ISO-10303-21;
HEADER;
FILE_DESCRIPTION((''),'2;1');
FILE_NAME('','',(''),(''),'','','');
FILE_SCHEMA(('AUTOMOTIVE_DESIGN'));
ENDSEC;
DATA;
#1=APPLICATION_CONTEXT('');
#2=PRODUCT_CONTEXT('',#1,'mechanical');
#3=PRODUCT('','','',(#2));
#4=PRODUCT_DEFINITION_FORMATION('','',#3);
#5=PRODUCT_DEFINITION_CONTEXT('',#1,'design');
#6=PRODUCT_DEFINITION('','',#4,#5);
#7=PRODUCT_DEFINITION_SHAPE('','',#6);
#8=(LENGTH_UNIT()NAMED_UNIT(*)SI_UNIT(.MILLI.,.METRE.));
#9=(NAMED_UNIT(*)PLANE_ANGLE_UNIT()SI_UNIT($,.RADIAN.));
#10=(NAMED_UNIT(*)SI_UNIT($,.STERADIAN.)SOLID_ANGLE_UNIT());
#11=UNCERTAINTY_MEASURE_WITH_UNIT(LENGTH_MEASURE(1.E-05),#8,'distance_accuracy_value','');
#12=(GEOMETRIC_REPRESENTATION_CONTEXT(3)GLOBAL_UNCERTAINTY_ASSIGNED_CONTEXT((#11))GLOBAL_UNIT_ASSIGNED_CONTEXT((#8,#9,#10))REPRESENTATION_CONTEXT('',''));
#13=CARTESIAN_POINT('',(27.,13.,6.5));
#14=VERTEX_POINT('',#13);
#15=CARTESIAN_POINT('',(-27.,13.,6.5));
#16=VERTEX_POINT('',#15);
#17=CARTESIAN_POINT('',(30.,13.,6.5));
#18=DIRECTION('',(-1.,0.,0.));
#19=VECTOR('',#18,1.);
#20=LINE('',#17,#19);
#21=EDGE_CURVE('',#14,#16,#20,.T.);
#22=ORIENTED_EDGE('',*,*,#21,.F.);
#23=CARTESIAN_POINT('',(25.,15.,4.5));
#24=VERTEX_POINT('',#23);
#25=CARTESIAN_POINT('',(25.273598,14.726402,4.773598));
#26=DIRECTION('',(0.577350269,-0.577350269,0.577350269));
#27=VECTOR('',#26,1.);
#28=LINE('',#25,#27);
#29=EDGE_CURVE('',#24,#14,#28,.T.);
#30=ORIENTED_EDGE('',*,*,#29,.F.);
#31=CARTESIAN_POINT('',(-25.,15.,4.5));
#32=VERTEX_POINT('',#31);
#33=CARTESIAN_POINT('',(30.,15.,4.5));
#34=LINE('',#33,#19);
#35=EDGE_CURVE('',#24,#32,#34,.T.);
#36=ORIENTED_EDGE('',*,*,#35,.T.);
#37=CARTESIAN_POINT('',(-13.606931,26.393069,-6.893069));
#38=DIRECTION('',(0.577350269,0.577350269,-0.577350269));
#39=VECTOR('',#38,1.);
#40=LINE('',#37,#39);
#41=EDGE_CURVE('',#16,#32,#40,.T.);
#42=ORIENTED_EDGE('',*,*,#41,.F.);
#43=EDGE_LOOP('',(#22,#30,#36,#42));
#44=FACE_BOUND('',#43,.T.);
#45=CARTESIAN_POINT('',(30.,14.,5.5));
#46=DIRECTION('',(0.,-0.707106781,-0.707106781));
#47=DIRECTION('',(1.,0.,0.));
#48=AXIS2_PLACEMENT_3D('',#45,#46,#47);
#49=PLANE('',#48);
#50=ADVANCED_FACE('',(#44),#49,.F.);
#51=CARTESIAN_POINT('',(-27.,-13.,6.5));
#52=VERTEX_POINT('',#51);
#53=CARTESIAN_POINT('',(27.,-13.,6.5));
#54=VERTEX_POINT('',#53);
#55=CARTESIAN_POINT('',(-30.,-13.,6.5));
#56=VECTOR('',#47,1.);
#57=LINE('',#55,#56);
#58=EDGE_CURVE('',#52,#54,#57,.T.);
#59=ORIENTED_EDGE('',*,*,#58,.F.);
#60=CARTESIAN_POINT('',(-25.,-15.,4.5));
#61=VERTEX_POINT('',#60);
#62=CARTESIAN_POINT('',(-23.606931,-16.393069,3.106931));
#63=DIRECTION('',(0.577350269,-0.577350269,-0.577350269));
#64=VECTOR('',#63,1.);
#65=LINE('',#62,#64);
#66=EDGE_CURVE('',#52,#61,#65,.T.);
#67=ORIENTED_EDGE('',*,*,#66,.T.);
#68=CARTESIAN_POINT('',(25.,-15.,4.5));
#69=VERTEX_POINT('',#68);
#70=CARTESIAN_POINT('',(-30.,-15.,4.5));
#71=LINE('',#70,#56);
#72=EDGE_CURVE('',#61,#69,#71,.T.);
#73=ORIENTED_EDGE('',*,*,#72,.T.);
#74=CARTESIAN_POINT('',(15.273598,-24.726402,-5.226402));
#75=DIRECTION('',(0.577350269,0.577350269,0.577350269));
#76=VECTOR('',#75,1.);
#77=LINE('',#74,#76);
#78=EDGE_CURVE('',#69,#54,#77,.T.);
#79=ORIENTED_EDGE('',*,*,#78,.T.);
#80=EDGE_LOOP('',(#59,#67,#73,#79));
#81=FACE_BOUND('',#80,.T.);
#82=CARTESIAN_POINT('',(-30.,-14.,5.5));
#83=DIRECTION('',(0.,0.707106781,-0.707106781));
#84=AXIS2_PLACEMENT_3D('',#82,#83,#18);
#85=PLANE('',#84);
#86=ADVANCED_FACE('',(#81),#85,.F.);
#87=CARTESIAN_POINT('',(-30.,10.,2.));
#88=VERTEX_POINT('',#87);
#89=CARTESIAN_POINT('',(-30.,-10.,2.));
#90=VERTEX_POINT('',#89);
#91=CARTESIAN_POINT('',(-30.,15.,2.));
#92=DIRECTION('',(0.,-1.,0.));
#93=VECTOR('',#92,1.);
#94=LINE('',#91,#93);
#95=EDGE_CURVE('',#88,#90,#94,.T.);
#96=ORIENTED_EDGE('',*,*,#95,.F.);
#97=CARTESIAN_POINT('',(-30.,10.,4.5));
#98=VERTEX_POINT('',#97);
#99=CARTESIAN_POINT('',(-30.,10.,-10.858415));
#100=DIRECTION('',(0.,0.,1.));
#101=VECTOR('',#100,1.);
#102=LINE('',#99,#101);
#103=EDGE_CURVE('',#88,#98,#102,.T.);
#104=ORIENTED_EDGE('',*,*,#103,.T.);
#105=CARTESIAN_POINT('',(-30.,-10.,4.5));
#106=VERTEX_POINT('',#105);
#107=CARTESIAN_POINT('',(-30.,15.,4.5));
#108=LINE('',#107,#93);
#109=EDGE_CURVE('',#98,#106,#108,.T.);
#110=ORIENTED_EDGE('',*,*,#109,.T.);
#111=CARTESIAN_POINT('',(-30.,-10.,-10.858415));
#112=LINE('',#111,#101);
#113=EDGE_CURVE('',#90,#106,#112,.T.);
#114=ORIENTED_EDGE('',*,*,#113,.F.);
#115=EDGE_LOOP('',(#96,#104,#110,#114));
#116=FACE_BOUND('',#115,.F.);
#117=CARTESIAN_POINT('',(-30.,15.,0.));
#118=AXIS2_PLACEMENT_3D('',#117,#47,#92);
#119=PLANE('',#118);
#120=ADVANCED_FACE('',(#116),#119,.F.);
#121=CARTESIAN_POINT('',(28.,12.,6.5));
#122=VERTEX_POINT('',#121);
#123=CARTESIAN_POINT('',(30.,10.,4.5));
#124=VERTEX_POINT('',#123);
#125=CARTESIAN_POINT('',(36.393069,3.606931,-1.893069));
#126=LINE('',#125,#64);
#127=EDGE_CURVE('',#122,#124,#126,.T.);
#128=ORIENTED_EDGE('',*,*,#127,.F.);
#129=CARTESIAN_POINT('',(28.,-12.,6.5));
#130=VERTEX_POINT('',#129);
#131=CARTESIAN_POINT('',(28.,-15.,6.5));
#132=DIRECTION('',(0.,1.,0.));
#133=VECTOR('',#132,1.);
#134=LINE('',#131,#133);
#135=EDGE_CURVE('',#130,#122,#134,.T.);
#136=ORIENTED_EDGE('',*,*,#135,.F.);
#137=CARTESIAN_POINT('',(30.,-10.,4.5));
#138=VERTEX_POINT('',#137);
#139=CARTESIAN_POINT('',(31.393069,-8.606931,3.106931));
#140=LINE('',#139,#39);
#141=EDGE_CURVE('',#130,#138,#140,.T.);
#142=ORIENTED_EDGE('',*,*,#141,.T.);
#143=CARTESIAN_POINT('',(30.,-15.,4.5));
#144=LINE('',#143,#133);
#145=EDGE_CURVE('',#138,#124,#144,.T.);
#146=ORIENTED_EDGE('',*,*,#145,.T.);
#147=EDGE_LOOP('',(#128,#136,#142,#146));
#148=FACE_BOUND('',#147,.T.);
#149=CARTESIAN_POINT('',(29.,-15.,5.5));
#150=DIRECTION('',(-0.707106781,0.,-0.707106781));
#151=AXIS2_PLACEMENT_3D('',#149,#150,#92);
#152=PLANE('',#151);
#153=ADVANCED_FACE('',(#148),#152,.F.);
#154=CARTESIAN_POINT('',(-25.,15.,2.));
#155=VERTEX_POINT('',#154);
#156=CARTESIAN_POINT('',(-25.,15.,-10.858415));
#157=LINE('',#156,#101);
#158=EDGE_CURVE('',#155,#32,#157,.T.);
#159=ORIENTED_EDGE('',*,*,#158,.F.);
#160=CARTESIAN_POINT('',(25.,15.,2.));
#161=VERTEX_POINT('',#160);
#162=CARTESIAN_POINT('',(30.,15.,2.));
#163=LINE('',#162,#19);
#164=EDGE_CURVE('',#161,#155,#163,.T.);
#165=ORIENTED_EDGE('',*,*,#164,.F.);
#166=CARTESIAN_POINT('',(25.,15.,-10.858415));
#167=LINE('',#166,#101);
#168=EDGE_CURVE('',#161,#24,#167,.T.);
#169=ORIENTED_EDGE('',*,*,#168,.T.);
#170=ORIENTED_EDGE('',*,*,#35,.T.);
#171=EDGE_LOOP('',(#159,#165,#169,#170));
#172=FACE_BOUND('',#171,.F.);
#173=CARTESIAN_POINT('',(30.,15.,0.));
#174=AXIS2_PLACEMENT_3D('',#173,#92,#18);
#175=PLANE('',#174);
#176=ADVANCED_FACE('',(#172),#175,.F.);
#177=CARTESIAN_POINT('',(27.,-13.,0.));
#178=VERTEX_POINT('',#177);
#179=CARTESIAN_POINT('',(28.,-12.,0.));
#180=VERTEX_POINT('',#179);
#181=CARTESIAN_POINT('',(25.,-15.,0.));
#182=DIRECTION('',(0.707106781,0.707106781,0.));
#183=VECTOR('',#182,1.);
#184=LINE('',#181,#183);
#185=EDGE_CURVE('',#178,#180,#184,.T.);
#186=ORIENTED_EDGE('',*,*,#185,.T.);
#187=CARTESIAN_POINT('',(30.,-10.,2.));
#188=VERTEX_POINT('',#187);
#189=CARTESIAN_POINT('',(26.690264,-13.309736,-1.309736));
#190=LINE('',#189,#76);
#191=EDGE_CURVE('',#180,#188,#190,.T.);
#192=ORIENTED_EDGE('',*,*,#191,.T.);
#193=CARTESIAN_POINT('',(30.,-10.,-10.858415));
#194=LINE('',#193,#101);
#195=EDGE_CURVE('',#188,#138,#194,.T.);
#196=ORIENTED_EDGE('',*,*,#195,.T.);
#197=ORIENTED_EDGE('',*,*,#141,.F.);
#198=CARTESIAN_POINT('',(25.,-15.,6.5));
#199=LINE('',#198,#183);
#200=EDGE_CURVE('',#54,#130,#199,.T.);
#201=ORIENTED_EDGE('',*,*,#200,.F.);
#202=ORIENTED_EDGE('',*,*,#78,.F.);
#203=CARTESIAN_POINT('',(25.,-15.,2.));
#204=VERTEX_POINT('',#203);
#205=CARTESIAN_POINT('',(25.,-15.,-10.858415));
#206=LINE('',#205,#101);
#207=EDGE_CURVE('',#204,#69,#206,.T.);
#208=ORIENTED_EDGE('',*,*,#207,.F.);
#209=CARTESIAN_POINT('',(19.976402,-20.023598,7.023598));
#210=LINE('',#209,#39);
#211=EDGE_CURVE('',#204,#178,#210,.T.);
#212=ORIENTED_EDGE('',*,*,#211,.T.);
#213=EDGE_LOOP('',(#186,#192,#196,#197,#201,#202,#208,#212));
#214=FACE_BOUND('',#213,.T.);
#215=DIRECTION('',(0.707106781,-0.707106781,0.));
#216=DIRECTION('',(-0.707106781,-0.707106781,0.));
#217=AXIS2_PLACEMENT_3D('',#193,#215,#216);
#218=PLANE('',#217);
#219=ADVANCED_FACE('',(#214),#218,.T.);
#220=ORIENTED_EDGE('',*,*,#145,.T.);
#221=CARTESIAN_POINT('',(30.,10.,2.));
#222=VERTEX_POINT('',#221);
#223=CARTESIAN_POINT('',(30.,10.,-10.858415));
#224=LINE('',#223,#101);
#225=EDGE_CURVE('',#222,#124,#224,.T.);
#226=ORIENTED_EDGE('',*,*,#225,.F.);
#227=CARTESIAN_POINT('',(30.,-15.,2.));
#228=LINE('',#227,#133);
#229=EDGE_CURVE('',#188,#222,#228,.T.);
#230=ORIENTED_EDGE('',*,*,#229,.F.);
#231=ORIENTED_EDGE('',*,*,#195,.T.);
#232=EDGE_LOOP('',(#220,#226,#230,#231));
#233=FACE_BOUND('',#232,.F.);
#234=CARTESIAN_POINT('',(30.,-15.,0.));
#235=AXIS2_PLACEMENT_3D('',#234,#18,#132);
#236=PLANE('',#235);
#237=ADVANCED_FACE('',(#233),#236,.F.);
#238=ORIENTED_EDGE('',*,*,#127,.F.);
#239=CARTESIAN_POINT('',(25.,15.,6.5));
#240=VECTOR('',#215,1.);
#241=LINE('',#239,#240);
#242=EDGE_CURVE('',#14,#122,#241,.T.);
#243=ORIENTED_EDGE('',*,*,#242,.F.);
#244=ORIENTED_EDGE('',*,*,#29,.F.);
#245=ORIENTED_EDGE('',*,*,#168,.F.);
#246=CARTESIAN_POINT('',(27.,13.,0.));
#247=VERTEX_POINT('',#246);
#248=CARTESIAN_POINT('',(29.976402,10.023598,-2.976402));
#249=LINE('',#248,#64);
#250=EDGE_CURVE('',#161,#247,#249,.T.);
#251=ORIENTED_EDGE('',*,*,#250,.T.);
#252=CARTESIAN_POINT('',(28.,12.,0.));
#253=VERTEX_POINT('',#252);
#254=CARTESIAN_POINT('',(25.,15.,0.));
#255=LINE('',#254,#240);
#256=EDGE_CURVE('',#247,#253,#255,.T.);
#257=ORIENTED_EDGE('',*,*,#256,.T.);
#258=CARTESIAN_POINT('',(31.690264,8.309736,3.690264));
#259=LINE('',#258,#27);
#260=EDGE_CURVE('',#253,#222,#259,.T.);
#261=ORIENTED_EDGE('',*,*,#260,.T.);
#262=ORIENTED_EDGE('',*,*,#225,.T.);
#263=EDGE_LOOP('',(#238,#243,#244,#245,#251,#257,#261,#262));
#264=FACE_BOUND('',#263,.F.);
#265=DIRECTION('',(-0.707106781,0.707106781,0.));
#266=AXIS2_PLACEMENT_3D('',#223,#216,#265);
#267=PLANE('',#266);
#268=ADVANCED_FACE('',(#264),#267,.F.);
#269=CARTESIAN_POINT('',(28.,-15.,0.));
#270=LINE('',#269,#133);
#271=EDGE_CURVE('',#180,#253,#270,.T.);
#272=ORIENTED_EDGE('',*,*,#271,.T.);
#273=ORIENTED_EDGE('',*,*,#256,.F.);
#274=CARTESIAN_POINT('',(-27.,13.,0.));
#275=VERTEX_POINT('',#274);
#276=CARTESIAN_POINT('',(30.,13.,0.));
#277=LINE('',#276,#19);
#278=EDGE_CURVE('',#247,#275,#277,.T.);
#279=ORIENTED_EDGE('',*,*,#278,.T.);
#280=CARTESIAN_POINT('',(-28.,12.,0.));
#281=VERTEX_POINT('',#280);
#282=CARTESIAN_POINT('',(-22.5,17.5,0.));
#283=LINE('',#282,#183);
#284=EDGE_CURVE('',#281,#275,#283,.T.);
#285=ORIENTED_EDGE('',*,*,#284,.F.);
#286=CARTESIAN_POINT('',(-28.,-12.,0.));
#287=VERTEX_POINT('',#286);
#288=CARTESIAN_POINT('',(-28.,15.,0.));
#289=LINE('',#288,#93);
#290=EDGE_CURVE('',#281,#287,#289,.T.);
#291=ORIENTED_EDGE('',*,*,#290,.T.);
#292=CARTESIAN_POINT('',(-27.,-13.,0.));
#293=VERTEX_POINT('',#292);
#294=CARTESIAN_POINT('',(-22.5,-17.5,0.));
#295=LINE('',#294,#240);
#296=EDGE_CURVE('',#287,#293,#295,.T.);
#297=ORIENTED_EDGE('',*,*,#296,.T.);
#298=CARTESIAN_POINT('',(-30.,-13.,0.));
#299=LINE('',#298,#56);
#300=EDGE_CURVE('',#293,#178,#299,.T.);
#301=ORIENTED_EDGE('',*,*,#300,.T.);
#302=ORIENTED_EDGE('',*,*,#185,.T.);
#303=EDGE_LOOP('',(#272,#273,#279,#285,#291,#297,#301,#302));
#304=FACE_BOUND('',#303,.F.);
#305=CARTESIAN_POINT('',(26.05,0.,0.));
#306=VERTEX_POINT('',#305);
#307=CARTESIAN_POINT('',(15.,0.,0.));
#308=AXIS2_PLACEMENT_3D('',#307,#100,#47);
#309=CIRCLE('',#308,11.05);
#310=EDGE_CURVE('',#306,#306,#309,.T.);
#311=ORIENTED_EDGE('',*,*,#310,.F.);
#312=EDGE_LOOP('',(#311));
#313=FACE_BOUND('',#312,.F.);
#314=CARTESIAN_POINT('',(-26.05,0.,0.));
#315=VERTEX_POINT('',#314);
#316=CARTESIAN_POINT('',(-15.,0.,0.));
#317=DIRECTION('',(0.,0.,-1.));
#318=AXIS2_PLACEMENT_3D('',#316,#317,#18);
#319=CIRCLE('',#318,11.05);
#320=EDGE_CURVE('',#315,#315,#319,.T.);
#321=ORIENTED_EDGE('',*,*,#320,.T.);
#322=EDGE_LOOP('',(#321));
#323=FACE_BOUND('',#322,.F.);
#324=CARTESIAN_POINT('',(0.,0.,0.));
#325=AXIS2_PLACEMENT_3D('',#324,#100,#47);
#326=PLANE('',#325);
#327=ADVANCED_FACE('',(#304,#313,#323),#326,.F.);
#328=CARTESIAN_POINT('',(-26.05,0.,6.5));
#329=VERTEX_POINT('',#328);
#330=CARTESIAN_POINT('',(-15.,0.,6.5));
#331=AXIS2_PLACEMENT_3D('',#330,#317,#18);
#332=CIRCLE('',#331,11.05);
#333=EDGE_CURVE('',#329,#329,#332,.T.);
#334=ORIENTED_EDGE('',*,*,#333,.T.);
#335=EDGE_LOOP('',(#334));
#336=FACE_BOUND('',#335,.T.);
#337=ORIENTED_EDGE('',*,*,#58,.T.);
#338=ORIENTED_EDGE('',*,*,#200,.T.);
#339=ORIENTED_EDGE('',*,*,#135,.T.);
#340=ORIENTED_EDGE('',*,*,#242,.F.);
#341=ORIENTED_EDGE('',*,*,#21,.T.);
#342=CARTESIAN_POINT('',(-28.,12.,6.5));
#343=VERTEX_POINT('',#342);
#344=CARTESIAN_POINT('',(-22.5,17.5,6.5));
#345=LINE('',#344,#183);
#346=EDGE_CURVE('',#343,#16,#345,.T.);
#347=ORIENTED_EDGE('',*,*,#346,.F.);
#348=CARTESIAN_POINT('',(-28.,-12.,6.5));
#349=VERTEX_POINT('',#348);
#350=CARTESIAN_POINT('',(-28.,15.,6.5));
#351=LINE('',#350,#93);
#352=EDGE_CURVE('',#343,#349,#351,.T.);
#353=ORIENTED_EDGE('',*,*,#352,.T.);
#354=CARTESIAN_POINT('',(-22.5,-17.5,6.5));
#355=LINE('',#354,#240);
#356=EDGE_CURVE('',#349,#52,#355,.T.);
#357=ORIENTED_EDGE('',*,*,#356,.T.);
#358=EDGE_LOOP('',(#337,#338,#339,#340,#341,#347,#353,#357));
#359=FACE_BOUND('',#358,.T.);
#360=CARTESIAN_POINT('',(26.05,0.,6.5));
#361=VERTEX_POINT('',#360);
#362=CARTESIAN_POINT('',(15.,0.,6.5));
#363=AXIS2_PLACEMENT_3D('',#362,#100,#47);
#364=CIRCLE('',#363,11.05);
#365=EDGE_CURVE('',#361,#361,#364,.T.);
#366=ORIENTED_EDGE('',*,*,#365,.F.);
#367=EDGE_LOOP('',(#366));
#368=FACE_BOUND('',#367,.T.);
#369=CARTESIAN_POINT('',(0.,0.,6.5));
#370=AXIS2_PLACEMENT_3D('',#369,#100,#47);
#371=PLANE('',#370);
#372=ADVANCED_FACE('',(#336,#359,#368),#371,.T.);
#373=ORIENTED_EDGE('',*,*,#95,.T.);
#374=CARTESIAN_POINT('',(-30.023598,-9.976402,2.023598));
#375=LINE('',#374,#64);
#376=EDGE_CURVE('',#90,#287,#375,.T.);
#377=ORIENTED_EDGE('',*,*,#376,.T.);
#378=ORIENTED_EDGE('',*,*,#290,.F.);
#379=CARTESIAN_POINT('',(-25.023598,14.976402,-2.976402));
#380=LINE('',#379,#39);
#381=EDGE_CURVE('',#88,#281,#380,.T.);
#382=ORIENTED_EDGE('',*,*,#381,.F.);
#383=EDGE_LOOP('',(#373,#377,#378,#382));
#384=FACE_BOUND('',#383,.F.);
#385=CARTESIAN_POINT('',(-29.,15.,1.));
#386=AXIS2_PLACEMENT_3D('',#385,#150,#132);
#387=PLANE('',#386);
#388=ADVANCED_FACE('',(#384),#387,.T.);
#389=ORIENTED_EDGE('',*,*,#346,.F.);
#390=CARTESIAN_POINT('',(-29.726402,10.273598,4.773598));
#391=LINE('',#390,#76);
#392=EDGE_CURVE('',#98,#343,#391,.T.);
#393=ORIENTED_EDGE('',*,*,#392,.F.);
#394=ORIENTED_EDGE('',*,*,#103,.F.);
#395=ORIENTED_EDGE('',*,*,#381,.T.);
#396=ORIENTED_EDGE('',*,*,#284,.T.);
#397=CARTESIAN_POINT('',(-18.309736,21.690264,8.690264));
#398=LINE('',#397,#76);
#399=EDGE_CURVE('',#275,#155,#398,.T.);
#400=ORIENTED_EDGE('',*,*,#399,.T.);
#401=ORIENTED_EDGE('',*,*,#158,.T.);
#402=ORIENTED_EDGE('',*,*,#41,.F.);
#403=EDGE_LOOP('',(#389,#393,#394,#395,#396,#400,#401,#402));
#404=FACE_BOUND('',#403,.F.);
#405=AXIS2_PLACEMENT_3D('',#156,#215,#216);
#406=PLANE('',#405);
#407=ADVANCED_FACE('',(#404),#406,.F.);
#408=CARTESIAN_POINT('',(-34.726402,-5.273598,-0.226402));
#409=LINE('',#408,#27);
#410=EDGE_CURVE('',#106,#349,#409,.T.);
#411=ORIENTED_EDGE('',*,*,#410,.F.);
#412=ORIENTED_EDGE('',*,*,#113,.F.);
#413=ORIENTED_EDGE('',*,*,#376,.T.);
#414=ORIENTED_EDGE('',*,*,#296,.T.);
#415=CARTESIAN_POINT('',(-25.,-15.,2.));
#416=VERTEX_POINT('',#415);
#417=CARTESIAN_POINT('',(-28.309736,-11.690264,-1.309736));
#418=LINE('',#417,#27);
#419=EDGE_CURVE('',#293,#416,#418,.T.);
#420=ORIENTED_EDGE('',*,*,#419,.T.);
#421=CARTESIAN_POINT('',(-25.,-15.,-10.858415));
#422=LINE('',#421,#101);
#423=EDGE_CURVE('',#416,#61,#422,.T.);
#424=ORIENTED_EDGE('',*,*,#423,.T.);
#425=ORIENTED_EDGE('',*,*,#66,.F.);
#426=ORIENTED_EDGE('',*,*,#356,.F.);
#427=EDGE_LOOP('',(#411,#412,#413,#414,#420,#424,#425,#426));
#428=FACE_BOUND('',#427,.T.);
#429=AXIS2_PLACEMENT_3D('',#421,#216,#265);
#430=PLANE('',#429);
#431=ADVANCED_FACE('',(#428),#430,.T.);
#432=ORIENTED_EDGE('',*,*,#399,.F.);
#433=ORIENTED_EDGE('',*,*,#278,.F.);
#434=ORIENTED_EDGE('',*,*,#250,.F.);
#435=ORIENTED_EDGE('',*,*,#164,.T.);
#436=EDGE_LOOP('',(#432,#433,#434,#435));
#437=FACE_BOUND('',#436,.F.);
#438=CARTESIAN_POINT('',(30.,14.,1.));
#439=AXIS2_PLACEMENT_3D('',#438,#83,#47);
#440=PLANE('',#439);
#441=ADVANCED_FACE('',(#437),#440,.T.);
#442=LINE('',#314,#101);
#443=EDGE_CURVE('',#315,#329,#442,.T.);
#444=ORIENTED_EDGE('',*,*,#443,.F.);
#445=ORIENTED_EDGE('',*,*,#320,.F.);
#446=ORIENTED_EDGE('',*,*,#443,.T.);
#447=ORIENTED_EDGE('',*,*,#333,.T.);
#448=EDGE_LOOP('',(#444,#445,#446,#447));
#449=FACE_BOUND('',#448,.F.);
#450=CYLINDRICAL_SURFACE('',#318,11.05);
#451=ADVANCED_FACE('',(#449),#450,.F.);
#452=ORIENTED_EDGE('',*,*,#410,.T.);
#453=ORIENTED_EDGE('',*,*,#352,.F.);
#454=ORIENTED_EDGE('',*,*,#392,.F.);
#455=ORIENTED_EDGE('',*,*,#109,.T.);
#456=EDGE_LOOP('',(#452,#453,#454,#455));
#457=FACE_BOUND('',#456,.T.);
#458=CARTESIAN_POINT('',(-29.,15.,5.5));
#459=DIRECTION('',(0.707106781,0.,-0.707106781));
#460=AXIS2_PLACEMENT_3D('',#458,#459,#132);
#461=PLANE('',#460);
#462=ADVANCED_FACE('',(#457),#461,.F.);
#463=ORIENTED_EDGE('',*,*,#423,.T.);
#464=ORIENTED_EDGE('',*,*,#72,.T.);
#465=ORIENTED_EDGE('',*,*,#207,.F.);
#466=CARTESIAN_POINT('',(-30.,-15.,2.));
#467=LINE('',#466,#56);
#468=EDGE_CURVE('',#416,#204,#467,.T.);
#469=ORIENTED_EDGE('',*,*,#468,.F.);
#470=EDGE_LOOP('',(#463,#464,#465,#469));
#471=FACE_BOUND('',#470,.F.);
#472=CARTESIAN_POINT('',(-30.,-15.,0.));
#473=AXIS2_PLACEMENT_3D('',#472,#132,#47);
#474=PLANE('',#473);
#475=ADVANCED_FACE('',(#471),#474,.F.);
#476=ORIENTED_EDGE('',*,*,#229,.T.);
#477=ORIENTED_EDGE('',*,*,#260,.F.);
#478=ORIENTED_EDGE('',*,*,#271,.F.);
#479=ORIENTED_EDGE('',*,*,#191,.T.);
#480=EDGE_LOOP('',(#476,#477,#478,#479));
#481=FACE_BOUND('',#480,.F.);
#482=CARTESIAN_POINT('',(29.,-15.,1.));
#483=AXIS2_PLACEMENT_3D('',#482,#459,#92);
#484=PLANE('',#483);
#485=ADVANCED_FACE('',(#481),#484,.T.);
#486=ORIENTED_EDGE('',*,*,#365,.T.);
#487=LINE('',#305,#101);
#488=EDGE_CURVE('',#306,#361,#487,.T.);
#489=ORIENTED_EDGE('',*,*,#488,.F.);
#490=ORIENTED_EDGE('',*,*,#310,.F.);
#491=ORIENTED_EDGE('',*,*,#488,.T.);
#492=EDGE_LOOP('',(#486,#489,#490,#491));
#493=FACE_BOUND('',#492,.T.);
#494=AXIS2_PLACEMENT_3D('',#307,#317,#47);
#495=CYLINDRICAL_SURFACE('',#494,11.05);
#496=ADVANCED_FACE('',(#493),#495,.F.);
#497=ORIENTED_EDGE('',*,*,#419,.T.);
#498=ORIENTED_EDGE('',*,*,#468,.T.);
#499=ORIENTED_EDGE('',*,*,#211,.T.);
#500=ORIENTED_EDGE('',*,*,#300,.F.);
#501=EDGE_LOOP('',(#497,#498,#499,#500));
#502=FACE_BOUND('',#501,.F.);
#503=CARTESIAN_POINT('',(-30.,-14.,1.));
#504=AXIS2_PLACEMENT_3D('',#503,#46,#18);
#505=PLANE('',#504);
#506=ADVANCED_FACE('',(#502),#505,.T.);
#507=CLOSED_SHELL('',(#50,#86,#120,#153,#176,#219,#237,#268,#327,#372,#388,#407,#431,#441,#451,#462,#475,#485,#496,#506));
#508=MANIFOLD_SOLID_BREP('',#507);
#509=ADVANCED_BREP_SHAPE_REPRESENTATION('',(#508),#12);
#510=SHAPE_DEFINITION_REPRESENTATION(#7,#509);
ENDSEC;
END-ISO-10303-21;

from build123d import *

# Parameters (mm, degrees)
F0_R        = 11.05
F1_DEPTH    = 6.5
F2_SIZE     = 2
F3_T1_DEPTH = 28.2168298797


# Not quite as in the source:
# - a fillet or chamfer that OpenCascade refuses, or shapes differently, is made with other operations: its cross-section is extruded or revolved along the edge and cut away or added


with BuildPart() as f1:
    # F0 (on Top) → F1 (new body)
    with BuildSketch(Plane.XY):
        Polygon((30, 0), (30, 15), (-30, 15), (-30, 0), (-30, -15), (30, -15), align=None)
        with BuildLine():
            ThreePointArc((-3.95, 0), (-15, -11.05), (-26.05, 0))
            ThreePointArc((-26.05, 0), (-15, 11.05), (-3.95, 0))
        make_face(mode=Mode.SUBTRACT)
        with Locations((15, 0)):
            Circle(F0_R, mode=Mode.SUBTRACT)
    extrude(amount=F1_DEPTH)

    # F2
    f2_edges = [f1.edges().sort_by_distance(p)[0] for p in [
        (-30, 0, 6.5),
        (-30, 0, 0),
        (0, -15, 0),
        (0, -15, 6.5),
        (0, 15, 0),
        (0, 15, 6.5),
        (30, 0, 0),
        (30, 0, 6.5),
    ]]
    chamfer(f2_edges, length=F2_SIZE)

    # F3: chamfer of 5 on 4 edges, made by hand

    # F3_s2 → F3_t1 (cut)
    with BuildSketch(Plane.XY.offset(-10.8584149398)):
        Polygon((30, 10), (25, 15), (30, 15), align=None)
        Polygon((30, -10), (25, -15), (30, -15), align=None)
        Polygon((-25, 15), (-30, 10), (-30, 15), align=None)
        Polygon((-25, -15), (-30, -10), (-30, -15), align=None)
    extrude(amount=F3_T1_DEPTH, mode=Mode.SUBTRACT)


solid = f1.part
